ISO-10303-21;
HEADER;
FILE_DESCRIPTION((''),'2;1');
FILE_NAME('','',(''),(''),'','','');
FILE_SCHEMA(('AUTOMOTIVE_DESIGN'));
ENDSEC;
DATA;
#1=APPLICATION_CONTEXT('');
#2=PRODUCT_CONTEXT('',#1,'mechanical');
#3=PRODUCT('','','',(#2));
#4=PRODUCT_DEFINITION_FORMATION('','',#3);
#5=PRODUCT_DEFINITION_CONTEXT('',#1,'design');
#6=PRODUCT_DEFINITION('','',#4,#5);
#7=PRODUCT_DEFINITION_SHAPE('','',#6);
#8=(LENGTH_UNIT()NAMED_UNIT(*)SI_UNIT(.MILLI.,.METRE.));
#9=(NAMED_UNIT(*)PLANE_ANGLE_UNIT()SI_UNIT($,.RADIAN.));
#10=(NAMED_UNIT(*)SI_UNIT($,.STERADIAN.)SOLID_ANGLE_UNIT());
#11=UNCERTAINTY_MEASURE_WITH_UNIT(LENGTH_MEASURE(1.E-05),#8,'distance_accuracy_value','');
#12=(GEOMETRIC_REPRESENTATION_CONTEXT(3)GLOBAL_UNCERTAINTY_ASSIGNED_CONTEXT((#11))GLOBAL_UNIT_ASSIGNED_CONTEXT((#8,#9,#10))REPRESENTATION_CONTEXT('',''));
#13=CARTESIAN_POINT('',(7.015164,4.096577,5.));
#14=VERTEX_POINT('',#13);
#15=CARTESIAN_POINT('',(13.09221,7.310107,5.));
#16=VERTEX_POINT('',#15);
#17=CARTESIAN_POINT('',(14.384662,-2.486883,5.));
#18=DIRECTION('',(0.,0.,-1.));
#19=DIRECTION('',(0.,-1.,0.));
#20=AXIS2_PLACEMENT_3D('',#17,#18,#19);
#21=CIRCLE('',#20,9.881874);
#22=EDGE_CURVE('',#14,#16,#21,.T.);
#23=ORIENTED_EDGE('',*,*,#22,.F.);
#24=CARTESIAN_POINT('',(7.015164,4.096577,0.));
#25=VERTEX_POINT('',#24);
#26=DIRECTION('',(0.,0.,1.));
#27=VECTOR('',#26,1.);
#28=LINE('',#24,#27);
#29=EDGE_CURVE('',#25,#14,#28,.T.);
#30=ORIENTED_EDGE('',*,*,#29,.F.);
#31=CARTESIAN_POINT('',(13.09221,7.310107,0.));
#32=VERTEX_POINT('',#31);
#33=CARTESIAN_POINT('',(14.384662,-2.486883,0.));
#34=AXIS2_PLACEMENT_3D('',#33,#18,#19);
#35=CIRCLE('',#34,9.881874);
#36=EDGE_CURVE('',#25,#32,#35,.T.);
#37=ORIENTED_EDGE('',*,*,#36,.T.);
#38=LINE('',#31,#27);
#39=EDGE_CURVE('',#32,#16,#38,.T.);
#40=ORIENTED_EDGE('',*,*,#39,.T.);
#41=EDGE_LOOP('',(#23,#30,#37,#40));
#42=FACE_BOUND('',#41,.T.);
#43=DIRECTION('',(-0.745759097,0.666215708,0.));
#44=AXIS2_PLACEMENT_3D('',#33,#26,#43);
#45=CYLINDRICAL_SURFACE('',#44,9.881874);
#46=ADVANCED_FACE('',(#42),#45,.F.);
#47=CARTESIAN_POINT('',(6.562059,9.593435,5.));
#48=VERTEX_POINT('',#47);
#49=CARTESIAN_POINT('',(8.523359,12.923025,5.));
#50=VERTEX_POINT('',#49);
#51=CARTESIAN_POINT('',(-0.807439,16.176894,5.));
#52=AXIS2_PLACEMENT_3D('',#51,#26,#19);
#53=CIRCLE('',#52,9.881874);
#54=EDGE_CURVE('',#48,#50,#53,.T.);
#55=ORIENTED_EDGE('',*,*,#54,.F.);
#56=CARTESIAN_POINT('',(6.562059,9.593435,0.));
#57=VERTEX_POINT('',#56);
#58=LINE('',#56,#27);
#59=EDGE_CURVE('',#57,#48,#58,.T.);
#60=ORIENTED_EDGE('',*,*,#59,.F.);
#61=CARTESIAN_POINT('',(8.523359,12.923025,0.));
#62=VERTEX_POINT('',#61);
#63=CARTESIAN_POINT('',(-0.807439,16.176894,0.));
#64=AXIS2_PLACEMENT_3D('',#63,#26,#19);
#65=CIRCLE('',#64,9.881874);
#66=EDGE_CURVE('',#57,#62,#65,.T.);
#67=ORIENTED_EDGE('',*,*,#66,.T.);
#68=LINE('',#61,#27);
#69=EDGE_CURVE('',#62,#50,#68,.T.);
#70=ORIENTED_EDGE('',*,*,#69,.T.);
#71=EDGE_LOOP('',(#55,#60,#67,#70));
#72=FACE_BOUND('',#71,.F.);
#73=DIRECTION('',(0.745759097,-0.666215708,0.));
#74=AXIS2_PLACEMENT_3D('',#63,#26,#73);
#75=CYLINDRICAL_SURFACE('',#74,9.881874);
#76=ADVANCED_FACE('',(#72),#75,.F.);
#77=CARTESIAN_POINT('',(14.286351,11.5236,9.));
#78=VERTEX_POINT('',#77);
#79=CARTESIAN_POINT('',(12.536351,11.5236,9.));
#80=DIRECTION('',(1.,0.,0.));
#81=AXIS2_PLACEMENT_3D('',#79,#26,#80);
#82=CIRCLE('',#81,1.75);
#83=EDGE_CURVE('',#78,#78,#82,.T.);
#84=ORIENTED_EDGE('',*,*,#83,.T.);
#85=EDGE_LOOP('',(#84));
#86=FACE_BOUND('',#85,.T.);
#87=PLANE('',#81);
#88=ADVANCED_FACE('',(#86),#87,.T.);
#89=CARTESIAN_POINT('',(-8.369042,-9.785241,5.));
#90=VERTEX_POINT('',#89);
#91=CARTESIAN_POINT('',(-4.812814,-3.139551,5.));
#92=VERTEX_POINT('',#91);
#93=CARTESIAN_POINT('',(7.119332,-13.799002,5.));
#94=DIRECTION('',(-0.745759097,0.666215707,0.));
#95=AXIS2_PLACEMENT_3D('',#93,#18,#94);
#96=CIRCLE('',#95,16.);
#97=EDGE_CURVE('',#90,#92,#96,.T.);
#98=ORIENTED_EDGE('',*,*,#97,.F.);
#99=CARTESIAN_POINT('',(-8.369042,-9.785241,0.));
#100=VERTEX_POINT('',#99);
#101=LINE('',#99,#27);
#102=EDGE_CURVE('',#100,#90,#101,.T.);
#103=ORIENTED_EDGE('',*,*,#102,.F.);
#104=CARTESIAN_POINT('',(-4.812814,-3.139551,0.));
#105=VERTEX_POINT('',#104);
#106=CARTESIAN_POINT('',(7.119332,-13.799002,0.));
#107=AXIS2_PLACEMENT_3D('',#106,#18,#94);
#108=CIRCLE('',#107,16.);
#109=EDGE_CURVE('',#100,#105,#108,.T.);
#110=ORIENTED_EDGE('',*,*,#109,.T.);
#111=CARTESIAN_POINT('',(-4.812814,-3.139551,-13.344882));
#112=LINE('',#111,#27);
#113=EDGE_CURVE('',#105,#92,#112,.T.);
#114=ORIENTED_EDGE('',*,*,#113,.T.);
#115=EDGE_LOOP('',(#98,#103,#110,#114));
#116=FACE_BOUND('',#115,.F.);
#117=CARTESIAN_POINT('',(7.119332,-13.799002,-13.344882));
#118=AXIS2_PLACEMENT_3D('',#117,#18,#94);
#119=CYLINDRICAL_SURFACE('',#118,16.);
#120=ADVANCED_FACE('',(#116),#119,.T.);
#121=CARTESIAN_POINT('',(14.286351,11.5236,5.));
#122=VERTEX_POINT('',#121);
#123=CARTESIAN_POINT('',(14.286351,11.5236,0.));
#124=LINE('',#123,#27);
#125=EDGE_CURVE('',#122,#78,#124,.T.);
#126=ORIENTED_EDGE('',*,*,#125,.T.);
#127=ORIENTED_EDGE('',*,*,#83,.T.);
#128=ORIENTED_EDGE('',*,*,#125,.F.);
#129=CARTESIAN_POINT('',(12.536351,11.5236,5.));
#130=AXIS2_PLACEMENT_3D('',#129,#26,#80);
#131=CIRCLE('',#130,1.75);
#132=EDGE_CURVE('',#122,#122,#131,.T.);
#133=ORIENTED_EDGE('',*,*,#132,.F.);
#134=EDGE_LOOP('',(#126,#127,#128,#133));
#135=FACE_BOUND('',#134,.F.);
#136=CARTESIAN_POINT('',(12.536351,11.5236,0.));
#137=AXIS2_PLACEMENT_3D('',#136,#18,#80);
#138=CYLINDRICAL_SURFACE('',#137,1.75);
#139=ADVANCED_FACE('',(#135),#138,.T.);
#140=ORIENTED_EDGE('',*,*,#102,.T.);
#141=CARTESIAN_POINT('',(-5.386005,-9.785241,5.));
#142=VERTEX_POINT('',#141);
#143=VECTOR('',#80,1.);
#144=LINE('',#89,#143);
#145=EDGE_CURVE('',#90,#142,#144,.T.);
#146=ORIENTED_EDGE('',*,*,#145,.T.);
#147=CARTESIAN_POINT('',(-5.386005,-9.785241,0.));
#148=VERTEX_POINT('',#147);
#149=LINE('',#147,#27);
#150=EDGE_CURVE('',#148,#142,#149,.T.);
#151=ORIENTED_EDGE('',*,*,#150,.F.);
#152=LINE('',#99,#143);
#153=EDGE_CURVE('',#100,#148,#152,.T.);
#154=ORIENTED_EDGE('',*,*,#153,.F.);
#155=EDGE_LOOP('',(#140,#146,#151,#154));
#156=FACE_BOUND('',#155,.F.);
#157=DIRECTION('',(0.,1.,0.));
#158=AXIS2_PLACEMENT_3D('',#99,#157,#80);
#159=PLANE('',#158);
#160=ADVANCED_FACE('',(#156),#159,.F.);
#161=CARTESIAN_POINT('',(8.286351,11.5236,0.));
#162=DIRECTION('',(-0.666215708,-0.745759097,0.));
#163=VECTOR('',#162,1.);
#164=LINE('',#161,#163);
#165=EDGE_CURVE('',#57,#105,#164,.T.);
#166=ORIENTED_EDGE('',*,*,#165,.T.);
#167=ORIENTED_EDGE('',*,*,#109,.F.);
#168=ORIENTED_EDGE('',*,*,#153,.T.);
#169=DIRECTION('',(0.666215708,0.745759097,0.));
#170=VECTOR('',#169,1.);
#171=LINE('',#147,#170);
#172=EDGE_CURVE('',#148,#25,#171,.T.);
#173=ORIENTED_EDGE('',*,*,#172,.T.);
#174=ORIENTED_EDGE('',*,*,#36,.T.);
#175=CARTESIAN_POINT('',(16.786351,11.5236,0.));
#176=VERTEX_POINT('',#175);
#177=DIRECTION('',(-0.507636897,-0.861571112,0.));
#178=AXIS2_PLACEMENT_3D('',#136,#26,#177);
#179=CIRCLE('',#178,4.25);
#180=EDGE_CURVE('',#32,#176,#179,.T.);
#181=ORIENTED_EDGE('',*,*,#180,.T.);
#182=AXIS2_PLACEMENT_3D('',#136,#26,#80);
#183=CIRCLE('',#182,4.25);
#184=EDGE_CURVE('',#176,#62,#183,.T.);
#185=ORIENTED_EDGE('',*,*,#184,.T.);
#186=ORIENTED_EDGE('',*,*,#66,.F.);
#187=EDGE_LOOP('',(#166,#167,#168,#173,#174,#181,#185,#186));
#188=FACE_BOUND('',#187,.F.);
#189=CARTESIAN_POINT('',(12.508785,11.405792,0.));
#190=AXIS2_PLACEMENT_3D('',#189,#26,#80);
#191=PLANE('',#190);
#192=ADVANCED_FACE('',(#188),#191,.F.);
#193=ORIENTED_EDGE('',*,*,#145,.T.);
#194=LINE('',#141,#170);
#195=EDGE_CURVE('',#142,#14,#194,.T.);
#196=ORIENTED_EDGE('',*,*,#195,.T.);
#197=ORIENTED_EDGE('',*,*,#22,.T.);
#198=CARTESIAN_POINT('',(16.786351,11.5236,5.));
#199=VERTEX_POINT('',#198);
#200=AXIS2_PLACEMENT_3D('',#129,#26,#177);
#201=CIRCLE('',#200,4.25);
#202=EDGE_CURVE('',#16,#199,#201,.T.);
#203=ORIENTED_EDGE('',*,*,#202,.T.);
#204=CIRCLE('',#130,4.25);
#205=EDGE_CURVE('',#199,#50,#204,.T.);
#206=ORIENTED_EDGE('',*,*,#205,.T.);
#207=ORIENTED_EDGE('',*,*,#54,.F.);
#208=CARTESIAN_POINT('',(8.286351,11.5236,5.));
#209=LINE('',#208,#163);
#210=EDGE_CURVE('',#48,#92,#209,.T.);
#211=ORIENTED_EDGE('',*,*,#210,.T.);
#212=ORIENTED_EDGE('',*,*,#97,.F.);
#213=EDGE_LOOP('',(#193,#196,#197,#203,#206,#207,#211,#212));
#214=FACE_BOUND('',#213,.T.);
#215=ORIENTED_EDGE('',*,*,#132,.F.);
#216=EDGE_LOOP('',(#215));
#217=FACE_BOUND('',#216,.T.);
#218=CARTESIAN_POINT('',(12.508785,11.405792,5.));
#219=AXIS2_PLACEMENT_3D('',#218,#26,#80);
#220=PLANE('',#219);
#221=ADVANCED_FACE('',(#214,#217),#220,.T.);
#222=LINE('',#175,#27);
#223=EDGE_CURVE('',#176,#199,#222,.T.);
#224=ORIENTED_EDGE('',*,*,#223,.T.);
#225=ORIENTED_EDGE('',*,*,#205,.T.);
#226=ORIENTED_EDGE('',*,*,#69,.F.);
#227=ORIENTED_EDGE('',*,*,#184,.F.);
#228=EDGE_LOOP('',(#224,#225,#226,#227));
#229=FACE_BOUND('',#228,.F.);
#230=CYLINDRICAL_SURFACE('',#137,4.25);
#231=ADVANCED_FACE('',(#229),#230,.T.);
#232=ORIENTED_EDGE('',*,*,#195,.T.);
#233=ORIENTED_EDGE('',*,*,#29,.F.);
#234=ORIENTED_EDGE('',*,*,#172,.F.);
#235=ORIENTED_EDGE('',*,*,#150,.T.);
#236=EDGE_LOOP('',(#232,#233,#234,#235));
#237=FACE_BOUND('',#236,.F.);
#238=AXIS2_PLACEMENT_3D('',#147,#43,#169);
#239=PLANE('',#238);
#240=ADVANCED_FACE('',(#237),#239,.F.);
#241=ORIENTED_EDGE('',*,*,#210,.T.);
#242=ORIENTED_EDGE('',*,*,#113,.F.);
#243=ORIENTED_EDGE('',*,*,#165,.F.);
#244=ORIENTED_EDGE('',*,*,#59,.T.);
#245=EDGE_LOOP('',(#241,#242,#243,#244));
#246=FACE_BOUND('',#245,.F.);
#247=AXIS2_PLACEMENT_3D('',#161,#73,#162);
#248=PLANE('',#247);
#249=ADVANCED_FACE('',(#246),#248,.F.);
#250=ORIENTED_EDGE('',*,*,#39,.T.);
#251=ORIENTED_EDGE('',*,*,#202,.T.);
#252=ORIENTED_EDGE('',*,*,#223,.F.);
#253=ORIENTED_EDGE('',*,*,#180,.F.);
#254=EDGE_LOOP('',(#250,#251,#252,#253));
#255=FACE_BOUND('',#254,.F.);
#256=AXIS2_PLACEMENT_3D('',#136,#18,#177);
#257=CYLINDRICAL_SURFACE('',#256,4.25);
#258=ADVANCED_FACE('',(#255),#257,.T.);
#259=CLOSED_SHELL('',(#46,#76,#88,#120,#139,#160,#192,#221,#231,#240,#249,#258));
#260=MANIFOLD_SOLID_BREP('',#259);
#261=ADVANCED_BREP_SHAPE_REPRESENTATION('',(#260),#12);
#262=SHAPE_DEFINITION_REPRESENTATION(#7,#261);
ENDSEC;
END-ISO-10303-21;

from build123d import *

# Parameters (mm, degrees)
F0_R        = 1.75
F1_DEPTH    = 5
F2_DEPTH    = 9
F3_T1_DEPTH = 31.689764736
F4_R        = 9.8818743841


# Not quite as in the source:
# - a fillet or chamfer that OpenCascade refuses, or shapes differently, is made with other operations: its cross-section is extruded or revolved along the edge and cut away or added


with BuildPart() as f1:
    # F0 (on Top) → F1 (new body)
    with BuildSketch(Plane.XY):
        with BuildLine():
            ThreePointArc((10.3788942671, 7.8619225196), (14.645060229, 7.8336341982), (16.7863510811, 11.523599744))
            ThreePointArc((16.7863510811, 11.523599744), (12.5363510811, 15.773599744), (8.2863510811, 11.523599744))
            ThreePointArc((8.2863510811, 11.523599744), (8.8463855352, 9.4148905962), (10.3788942671, 7.8619225196))
        make_face()
        with Locations((12.5363510811, 11.523599744)):
            Circle(F0_R, mode=Mode.SUBTRACT)
        with BuildLine():
            ThreePointArc((10.3788942671, 7.8619225196), (8.8463855352, 9.4148905962), (8.2863510811, 11.523599744))
            Line((8.2863510811, 11.523599744), (-8.3690416068, -7.120377686))
            Line((-8.3690416068, -7.120377686), (-5.386005218, -9.7852405161))
            Line((-5.386005218, -9.7852405161), (10.3788942671, 7.8619225196))
        make_face()
        Polygon((-5.386005218, -9.7852405161), (-8.3690416068, -7.120377686), (-8.3690416068, -9.7852405161), align=None)
    extrude(amount=F1_DEPTH)

    # F0 (on Top) → F2 (join)
    with BuildSketch(Plane.XY):
        with Locations((12.5363510811, 11.523599744)):
            Circle(F0_R)
    extrude(amount=F2_DEPTH)

    # F3: fillet of radius 16 on 1 edges, made by hand

    # F3_s2 → F3_t1 (cut)
    with BuildSketch(Plane.XY.offset(-13.344882368)):
        with BuildLine():
            ThreePointArc((-4.8128135074, -3.1395507152), (-6.9878475663, -6.2499965822), (-8.3690416068, -9.7852405161))
            Line((-8.3690416068, -9.7852405161), (-8.3690416068, -7.120377686))
            Line((-8.3690416068, -7.120377686), (-4.8128135074, -3.1395507152))
        make_face()
    extrude(amount=F3_T1_DEPTH, mode=Mode.SUBTRACT)

    # F4
    f4_edges = [f1.edges().sort_by_distance(p)[0] for p in [
        (8.286351, 11.5236, 2.5),
        (10.378894, 7.861923, 2.5),
    ]]
    fillet(f4_edges, radius=F4_R)


solid = f1.part
